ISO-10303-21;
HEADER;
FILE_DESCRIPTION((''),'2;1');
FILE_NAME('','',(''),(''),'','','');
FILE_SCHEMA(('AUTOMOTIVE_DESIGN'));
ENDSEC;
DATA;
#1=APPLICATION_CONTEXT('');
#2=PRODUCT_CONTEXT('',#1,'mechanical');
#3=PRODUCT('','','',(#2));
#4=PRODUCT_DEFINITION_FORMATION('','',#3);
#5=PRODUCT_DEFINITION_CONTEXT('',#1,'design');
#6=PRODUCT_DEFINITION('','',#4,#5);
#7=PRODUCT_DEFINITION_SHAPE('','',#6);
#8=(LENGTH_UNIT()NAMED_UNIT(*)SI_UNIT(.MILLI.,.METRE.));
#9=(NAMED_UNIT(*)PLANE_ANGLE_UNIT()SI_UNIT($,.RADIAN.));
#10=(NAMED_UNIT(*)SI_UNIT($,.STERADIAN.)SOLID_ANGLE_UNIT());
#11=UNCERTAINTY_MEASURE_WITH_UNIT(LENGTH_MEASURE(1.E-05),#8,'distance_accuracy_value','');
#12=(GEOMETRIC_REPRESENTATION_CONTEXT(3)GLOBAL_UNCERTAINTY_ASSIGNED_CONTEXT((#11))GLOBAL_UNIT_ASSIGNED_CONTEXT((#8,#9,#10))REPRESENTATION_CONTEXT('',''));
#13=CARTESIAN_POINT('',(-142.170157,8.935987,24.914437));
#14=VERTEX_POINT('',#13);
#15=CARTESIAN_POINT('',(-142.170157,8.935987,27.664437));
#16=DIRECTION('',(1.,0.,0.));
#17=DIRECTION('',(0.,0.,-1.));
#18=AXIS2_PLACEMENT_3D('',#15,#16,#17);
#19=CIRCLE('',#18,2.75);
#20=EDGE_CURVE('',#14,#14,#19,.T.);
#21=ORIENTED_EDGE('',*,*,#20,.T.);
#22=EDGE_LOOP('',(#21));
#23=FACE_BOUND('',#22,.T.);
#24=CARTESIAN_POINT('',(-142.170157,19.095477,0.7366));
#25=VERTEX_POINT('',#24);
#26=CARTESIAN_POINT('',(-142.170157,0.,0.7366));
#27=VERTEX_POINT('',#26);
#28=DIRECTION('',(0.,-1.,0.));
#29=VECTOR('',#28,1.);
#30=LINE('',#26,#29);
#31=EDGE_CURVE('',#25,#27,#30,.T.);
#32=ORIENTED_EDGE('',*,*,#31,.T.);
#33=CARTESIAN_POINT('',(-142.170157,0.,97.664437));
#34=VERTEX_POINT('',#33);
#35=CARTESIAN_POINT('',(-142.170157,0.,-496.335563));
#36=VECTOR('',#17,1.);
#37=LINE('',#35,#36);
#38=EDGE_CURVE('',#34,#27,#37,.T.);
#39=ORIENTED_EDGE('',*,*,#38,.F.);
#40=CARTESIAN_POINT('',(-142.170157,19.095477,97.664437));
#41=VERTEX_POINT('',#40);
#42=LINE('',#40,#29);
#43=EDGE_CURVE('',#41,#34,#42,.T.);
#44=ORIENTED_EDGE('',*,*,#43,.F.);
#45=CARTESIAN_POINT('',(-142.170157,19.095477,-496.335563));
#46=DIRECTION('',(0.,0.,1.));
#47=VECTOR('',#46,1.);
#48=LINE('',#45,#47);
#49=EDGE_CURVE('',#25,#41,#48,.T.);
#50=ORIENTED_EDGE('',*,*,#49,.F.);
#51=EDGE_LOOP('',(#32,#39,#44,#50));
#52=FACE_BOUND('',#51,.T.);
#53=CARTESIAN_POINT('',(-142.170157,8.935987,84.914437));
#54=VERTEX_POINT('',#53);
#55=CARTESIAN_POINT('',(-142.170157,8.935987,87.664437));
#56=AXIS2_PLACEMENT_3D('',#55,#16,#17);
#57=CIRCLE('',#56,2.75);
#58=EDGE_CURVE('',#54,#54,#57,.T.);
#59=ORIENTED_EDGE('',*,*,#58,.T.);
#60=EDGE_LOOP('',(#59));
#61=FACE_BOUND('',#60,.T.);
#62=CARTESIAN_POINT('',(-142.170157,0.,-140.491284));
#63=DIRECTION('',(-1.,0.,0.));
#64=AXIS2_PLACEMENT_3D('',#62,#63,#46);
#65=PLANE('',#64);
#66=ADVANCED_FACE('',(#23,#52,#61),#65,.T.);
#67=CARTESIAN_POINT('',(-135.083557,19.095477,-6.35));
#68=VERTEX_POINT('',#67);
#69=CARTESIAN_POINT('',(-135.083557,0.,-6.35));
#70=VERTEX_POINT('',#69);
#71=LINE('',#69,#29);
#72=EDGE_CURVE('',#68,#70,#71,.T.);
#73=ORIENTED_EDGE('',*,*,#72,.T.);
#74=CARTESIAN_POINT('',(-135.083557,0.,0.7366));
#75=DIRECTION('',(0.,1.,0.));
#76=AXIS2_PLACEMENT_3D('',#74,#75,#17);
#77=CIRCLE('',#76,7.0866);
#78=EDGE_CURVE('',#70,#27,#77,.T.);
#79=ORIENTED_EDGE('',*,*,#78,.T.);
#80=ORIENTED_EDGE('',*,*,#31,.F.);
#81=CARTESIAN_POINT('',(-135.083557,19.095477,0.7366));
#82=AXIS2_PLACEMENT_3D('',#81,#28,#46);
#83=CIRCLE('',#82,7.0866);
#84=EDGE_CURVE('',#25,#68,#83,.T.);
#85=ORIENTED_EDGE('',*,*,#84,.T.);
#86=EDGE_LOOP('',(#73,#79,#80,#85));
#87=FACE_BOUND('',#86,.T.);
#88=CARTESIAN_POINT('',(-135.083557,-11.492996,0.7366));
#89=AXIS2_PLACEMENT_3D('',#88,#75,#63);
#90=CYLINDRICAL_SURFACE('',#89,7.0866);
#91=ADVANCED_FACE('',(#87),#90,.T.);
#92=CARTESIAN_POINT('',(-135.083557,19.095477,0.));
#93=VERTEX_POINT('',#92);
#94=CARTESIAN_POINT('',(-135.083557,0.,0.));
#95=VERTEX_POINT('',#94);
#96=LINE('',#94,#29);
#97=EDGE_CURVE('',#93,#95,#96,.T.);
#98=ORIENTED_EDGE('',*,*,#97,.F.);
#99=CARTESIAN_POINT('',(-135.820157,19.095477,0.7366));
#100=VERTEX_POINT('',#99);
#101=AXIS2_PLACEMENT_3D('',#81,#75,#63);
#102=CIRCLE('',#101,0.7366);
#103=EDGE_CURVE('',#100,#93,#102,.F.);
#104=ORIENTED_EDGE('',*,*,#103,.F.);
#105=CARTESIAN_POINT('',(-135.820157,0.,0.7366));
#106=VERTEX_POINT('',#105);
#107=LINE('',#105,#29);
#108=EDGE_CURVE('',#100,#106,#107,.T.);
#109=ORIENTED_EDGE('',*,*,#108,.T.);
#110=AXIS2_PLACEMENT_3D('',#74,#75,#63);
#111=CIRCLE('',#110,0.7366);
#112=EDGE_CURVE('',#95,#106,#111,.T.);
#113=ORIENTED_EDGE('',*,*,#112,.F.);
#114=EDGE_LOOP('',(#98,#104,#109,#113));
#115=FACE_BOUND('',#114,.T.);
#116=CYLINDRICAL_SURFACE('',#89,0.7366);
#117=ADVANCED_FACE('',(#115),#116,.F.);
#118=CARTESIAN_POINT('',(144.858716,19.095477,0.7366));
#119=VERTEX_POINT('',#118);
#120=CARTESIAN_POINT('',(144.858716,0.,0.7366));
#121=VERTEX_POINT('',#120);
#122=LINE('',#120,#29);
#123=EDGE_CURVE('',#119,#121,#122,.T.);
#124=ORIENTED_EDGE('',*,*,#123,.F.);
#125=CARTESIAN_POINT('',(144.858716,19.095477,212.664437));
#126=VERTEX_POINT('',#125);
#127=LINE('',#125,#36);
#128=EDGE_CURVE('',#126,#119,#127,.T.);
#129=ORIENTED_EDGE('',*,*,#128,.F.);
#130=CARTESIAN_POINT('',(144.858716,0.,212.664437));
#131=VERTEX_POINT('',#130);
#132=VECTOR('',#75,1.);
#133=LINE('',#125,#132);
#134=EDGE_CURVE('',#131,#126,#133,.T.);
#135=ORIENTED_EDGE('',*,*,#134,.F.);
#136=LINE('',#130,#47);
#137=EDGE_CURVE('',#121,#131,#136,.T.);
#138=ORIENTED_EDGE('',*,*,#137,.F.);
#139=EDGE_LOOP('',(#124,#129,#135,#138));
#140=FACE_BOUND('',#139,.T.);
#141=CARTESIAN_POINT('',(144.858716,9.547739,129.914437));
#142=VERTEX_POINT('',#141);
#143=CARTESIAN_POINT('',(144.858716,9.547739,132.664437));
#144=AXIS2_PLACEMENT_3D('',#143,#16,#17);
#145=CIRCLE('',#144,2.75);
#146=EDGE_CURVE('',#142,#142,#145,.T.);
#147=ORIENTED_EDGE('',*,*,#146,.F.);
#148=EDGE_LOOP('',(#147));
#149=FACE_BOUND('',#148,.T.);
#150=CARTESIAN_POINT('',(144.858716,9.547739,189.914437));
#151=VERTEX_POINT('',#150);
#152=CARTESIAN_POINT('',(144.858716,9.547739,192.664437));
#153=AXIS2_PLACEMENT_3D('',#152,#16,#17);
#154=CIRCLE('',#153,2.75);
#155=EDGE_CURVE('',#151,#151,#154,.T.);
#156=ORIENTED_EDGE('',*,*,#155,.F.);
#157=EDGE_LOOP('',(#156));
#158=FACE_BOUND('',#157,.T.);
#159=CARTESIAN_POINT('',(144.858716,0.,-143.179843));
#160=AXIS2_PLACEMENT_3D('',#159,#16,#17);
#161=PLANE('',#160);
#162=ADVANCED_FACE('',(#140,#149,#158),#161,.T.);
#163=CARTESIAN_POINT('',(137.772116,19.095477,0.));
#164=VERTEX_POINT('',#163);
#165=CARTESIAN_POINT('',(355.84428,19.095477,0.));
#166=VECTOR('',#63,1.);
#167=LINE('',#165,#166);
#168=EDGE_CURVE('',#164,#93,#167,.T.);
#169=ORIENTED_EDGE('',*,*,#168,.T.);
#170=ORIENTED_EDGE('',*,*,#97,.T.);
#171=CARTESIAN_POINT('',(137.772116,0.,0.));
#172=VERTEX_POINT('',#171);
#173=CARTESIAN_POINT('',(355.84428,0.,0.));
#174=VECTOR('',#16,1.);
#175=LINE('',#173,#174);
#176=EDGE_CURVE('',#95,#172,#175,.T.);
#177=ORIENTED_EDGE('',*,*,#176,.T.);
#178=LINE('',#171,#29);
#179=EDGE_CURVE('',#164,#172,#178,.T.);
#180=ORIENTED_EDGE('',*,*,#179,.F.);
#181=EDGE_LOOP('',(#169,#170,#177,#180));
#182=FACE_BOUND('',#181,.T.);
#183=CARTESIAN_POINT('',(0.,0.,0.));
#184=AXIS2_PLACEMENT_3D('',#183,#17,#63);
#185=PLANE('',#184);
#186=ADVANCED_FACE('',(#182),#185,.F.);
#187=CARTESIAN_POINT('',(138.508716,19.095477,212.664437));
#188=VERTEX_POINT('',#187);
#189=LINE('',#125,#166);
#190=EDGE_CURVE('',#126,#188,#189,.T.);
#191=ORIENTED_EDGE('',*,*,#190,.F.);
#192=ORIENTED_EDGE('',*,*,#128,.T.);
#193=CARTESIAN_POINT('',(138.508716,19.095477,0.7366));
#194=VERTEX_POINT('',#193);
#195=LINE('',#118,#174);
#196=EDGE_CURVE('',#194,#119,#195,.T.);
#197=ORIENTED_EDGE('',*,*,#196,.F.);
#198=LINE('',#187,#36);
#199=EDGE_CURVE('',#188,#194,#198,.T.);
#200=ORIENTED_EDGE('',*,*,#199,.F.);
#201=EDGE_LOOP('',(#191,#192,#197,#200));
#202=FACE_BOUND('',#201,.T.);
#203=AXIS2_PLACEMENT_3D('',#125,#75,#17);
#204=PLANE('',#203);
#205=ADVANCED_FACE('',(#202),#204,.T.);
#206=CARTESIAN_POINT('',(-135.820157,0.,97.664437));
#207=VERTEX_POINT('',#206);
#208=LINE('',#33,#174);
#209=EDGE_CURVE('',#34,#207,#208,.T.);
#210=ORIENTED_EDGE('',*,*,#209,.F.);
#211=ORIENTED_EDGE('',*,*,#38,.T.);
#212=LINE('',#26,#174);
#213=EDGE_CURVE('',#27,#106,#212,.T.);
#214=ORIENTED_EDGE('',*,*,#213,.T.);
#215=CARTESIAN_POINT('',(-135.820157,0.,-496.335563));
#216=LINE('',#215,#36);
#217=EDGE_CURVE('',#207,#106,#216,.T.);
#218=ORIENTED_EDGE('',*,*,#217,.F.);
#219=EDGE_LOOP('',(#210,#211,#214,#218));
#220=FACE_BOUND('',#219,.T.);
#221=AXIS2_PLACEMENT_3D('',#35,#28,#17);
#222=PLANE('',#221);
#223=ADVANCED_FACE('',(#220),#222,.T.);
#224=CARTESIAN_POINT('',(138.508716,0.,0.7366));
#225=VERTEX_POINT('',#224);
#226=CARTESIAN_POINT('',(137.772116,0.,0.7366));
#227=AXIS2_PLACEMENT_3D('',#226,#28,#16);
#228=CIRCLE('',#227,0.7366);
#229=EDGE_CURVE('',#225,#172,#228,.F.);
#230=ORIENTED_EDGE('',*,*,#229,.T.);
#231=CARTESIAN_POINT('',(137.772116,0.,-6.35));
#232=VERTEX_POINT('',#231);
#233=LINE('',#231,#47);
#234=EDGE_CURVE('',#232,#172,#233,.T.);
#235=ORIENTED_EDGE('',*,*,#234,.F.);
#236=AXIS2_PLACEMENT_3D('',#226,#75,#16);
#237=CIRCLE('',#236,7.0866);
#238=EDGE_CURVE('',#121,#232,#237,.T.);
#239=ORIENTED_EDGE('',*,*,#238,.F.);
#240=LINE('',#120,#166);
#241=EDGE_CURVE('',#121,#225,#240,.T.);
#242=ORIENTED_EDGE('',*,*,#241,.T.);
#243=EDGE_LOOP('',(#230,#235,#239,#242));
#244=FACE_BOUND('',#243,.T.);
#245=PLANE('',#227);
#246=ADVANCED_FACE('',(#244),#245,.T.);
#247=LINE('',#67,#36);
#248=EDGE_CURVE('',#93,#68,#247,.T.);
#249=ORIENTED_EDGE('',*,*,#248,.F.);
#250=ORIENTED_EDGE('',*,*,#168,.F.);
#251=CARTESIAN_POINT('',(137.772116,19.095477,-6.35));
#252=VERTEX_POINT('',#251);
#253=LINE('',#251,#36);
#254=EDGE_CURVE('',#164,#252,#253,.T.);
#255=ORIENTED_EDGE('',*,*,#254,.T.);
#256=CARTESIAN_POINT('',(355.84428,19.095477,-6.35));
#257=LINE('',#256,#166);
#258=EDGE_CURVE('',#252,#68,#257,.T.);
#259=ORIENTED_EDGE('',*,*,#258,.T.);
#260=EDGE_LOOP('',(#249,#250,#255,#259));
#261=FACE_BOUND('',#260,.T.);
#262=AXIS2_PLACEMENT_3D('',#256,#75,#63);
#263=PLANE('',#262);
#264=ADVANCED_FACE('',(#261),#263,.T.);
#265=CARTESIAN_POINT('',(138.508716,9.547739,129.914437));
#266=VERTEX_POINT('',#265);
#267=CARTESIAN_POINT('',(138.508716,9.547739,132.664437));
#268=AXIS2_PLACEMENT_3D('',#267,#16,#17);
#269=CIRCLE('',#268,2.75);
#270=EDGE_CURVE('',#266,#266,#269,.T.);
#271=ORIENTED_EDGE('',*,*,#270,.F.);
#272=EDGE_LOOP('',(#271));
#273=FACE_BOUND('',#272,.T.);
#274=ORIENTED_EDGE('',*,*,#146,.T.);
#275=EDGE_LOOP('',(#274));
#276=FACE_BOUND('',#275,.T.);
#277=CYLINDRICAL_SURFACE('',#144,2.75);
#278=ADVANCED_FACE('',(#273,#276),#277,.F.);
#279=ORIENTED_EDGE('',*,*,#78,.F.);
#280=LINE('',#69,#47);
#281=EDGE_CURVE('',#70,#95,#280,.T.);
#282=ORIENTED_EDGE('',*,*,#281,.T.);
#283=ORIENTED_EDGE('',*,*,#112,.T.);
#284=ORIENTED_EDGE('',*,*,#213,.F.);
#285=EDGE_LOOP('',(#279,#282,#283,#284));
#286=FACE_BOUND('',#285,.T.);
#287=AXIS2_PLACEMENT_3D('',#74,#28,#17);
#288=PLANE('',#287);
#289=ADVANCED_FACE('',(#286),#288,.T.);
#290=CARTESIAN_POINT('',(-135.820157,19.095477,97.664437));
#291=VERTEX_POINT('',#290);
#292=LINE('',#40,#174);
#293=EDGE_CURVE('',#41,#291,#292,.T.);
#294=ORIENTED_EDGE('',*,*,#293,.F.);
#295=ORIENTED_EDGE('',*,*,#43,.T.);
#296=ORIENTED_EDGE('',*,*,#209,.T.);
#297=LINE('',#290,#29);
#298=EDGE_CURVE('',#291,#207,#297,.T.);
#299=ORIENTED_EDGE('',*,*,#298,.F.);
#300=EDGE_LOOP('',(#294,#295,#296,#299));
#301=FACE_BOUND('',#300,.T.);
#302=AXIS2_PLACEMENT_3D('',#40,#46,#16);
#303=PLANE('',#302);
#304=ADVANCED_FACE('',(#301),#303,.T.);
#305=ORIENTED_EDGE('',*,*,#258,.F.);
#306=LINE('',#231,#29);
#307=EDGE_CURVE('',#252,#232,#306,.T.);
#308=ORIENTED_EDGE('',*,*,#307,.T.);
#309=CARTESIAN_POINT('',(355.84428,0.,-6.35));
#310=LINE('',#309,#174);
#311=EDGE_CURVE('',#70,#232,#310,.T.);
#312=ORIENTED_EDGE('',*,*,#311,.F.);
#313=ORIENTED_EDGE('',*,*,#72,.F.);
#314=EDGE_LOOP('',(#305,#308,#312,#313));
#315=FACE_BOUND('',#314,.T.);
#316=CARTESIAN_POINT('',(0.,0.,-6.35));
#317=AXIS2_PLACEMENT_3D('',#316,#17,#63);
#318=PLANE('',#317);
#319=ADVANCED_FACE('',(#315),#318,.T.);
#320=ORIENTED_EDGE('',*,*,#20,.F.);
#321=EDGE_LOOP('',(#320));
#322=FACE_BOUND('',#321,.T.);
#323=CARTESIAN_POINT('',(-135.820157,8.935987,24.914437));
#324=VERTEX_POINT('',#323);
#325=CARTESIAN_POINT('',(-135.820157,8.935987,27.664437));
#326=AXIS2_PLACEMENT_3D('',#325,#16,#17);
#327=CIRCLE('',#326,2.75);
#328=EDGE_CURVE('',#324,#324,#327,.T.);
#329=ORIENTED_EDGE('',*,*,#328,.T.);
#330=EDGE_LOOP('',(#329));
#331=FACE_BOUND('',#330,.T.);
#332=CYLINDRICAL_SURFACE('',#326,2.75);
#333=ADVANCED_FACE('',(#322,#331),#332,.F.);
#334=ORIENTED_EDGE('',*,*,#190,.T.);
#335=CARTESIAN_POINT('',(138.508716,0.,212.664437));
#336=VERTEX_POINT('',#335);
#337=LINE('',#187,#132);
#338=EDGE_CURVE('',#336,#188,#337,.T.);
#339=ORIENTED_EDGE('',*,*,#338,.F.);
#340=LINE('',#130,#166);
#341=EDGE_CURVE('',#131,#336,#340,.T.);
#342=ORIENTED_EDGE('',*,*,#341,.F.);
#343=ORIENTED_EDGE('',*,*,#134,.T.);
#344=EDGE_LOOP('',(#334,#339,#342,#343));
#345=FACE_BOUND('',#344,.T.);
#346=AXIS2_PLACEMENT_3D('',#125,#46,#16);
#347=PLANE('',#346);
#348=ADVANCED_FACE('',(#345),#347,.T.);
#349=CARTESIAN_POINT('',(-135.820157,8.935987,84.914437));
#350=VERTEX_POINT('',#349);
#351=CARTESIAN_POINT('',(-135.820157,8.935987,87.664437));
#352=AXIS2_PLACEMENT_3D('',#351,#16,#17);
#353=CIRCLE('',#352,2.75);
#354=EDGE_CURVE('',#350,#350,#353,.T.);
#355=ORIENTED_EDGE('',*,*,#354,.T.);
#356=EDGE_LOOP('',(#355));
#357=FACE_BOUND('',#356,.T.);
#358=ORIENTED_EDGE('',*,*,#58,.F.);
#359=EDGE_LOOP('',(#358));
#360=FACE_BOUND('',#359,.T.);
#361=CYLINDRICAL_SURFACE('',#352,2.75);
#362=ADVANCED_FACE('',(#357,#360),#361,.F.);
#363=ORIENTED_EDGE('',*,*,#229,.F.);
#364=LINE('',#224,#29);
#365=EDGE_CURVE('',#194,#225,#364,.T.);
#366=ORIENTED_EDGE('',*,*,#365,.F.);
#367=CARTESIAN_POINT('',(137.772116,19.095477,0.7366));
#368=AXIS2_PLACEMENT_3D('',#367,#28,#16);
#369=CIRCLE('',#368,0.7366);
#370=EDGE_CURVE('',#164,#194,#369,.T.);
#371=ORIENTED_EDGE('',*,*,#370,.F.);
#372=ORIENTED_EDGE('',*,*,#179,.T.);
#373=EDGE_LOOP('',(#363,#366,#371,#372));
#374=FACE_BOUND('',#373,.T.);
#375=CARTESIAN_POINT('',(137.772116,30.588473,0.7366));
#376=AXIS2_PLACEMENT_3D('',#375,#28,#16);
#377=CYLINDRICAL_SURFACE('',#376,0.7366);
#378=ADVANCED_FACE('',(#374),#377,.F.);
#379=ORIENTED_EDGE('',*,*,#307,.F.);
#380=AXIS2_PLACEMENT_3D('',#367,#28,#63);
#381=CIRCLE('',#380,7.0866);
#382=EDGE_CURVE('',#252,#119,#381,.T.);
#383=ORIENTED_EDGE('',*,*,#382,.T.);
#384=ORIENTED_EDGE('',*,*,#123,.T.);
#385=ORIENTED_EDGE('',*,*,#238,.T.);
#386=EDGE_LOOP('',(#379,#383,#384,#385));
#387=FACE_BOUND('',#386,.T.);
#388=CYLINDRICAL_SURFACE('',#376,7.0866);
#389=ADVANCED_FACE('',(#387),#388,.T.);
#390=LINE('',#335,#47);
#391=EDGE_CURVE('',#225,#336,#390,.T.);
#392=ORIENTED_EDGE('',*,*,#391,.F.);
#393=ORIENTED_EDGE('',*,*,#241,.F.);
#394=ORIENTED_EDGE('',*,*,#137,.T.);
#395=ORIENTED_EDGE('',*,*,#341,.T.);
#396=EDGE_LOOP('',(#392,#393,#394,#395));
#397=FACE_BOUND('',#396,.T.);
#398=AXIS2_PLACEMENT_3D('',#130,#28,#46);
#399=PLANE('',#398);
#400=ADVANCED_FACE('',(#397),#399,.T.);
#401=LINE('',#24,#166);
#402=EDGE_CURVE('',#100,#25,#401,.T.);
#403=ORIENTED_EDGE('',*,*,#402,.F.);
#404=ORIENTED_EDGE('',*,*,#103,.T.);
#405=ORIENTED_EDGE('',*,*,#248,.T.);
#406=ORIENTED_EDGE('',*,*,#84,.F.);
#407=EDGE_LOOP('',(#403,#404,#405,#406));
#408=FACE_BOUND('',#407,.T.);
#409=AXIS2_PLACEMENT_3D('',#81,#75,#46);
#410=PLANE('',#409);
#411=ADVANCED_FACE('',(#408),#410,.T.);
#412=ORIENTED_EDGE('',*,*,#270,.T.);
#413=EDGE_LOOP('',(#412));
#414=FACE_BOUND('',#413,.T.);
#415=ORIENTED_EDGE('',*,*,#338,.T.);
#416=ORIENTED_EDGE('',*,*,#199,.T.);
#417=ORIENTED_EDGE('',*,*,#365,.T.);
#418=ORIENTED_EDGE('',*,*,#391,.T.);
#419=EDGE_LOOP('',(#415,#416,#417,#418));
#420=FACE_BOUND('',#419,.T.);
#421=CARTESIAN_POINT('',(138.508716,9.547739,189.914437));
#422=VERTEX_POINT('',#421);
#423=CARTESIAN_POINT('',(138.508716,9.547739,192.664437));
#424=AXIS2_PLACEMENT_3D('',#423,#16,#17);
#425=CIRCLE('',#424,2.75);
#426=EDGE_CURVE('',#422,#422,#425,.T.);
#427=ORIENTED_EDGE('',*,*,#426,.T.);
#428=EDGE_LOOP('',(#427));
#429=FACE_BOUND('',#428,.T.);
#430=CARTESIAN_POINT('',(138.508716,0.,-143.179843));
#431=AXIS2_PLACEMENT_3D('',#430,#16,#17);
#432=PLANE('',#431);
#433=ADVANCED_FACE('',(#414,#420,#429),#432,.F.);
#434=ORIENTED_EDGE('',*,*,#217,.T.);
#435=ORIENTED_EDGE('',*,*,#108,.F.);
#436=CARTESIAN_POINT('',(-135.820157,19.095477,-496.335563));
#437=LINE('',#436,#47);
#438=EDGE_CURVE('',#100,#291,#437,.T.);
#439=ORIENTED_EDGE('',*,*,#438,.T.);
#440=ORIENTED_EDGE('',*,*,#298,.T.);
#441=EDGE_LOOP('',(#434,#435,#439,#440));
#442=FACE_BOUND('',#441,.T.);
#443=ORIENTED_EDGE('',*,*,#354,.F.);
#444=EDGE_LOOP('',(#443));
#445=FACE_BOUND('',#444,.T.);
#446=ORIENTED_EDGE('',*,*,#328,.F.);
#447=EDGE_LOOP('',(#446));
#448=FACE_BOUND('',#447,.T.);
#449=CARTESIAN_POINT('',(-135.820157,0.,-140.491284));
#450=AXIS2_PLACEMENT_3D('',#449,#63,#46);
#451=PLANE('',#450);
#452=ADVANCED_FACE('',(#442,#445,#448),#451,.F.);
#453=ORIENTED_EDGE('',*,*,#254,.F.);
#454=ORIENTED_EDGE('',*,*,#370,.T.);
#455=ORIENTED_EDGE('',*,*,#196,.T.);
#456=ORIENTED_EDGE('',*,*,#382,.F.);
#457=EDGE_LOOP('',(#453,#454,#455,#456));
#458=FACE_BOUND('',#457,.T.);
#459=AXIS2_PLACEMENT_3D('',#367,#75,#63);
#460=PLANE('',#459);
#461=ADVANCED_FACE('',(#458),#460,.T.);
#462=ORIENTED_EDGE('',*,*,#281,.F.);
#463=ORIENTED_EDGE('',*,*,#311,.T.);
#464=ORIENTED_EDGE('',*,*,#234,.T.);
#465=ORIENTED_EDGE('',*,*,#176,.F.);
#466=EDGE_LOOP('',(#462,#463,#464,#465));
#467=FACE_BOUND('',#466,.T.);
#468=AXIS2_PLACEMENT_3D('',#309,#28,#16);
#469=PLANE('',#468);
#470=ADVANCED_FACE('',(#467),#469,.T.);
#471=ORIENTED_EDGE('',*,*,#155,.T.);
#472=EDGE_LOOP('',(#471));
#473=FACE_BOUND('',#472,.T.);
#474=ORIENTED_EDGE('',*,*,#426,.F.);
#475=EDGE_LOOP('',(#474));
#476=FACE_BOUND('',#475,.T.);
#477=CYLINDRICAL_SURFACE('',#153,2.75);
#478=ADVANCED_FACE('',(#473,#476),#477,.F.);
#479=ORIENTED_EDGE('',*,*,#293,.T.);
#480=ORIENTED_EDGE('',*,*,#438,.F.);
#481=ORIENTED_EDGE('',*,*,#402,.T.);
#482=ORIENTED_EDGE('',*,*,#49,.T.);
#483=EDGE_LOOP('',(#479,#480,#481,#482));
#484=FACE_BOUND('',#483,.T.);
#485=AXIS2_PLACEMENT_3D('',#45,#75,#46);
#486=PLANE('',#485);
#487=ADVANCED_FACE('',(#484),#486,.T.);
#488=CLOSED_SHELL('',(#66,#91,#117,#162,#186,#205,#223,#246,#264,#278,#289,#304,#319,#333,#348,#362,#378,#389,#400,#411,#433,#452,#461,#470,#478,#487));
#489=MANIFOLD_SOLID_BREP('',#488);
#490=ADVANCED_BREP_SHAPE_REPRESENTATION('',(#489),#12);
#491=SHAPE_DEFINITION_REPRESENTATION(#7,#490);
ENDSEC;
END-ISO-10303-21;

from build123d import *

# Parameters (mm, degrees)
CROQUIS1_W                       = 594
CROQUIS1_H                       = 19.095477387
BRIDA_BASE1_DEPTH                = 6.35
PLIEGUE_CROQUIZADO1_DEPTH        = 19.095477387
PLIEGUE_CROQUIZADO1_2_DEPTH      = 19.095477387
TALADRO_DE_MARGEN_PARA_M51_D     = 5.5
TALADRO_DE_MARGEN_PARA_M52_D     = 5.5
TALADRO_DE_MARGEN_PARA_M52_DEPTH = 6.35


with BuildPart() as part:
    # Brida base1: sheet metal written as solids
    # Croquis1 → Brida base1 (new body)
    with BuildSketch(Plane.XY):
        with Locations((58.84427983, 9.547738694)):
            Rectangle(CROQUIS1_W, CROQUIS1_H)
    extrude(amount=-BRIDA_BASE1_DEPTH)

    # Pliegue croquizado1: read off the stored shape, not the designer's step
    # Pliegue croquizado1 outline → Pliegue croquizado1 (cut)
    with BuildSketch(Plane(origin=(0, 0, 0), x_dir=(1, 0, 0), z_dir=(0, 1, 0))):
        with BuildLine():
            ThreePointArc((-142.131770672, 0), (-139.826968461, 4.528373368), (-135.083556714, 6.35))
            Line((-135.083556714, 6.35), (-238.15572017, 6.35))
            Line((-238.15572017, 6.35), (-238.15572017, 0))
            Line((-238.15572017, 0), (-142.131770672, 0))
        make_face()
        with BuildLine():
            Line((355.84427983, 6.35), (137.772116374, 6.35))
            ThreePointArc((137.772116374, 6.35), (142.515528121, 4.528373367), (144.820330332, 0))
            Line((144.820330332, 0), (355.84427983, 0))
            Line((355.84427983, 0), (355.84427983, 6.35))
        make_face()
    extrude(amount=PLIEGUE_CROQUIZADO1_DEPTH, mode=Mode.SUBTRACT)

    # Pliegue croquizado1 2 outline → Pliegue croquizado1 2 (add)
    with BuildSketch(Plane(origin=(0, 0, 0), x_dir=(1, 0, 0), z_dir=(0, 1, 0))):
        with BuildLine():
            Line((-135.083556714, 0), (-142.131770672, 0))
            ThreePointArc((-142.131770672, 0), (-142.160553697, -0.367800241), (-142.170156714, -0.7366))
            Line((-142.170156714, -0.7366), (-142.170156714, -97.664436544))
            Line((-142.170156714, -97.664436544), (-135.820156714, -97.664436544))
            Line((-135.820156714, -97.664436544), (-135.820156714, -0.7366))
            ThreePointArc((-135.820156714, -0.7366), (-135.604411569, -0.215745145), (-135.083556714, 0))
        make_face()
        with BuildLine():
            ThreePointArc((144.858716374, -0.7366), (144.849113357, -0.367800241), (144.820330332, 0))
            Line((144.820330332, 0), (137.772116374, 0))
            ThreePointArc((137.772116374, 0), (138.292971229, -0.215745145), (138.508716374, -0.7366))
            Line((138.508716374, -0.7366), (138.508716374, -212.664436544))
            Line((138.508716374, -212.664436544), (144.858716374, -212.664436544))
            Line((144.858716374, -212.664436544), (144.858716374, -0.7366))
        make_face()
    extrude(amount=PLIEGUE_CROQUIZADO1_2_DEPTH)

    # Taladro de margen para M51 (through all)
    with Locations(Plane(origin=(144.858716374, 0, 0), x_dir=(0, 0, -1), z_dir=(1, 0, 0))):
        with Locations((-192.664436544, 9.547738693), (-132.664436544, 9.547738693)):
            Hole(TALADRO_DE_MARGEN_PARA_M51_D / 2)

    # Taladro de margen para M52
    with Locations(Plane(origin=(-135.820156714, 0, 0), x_dir=(0, 0, -1), z_dir=(1, 0, 0))):
        with Locations((-87.664436544, 8.935987286), (-27.664436544, 8.935987286)):
            Hole(TALADRO_DE_MARGEN_PARA_M52_D / 2, depth=TALADRO_DE_MARGEN_PARA_M52_DEPTH)


solid = part.part
